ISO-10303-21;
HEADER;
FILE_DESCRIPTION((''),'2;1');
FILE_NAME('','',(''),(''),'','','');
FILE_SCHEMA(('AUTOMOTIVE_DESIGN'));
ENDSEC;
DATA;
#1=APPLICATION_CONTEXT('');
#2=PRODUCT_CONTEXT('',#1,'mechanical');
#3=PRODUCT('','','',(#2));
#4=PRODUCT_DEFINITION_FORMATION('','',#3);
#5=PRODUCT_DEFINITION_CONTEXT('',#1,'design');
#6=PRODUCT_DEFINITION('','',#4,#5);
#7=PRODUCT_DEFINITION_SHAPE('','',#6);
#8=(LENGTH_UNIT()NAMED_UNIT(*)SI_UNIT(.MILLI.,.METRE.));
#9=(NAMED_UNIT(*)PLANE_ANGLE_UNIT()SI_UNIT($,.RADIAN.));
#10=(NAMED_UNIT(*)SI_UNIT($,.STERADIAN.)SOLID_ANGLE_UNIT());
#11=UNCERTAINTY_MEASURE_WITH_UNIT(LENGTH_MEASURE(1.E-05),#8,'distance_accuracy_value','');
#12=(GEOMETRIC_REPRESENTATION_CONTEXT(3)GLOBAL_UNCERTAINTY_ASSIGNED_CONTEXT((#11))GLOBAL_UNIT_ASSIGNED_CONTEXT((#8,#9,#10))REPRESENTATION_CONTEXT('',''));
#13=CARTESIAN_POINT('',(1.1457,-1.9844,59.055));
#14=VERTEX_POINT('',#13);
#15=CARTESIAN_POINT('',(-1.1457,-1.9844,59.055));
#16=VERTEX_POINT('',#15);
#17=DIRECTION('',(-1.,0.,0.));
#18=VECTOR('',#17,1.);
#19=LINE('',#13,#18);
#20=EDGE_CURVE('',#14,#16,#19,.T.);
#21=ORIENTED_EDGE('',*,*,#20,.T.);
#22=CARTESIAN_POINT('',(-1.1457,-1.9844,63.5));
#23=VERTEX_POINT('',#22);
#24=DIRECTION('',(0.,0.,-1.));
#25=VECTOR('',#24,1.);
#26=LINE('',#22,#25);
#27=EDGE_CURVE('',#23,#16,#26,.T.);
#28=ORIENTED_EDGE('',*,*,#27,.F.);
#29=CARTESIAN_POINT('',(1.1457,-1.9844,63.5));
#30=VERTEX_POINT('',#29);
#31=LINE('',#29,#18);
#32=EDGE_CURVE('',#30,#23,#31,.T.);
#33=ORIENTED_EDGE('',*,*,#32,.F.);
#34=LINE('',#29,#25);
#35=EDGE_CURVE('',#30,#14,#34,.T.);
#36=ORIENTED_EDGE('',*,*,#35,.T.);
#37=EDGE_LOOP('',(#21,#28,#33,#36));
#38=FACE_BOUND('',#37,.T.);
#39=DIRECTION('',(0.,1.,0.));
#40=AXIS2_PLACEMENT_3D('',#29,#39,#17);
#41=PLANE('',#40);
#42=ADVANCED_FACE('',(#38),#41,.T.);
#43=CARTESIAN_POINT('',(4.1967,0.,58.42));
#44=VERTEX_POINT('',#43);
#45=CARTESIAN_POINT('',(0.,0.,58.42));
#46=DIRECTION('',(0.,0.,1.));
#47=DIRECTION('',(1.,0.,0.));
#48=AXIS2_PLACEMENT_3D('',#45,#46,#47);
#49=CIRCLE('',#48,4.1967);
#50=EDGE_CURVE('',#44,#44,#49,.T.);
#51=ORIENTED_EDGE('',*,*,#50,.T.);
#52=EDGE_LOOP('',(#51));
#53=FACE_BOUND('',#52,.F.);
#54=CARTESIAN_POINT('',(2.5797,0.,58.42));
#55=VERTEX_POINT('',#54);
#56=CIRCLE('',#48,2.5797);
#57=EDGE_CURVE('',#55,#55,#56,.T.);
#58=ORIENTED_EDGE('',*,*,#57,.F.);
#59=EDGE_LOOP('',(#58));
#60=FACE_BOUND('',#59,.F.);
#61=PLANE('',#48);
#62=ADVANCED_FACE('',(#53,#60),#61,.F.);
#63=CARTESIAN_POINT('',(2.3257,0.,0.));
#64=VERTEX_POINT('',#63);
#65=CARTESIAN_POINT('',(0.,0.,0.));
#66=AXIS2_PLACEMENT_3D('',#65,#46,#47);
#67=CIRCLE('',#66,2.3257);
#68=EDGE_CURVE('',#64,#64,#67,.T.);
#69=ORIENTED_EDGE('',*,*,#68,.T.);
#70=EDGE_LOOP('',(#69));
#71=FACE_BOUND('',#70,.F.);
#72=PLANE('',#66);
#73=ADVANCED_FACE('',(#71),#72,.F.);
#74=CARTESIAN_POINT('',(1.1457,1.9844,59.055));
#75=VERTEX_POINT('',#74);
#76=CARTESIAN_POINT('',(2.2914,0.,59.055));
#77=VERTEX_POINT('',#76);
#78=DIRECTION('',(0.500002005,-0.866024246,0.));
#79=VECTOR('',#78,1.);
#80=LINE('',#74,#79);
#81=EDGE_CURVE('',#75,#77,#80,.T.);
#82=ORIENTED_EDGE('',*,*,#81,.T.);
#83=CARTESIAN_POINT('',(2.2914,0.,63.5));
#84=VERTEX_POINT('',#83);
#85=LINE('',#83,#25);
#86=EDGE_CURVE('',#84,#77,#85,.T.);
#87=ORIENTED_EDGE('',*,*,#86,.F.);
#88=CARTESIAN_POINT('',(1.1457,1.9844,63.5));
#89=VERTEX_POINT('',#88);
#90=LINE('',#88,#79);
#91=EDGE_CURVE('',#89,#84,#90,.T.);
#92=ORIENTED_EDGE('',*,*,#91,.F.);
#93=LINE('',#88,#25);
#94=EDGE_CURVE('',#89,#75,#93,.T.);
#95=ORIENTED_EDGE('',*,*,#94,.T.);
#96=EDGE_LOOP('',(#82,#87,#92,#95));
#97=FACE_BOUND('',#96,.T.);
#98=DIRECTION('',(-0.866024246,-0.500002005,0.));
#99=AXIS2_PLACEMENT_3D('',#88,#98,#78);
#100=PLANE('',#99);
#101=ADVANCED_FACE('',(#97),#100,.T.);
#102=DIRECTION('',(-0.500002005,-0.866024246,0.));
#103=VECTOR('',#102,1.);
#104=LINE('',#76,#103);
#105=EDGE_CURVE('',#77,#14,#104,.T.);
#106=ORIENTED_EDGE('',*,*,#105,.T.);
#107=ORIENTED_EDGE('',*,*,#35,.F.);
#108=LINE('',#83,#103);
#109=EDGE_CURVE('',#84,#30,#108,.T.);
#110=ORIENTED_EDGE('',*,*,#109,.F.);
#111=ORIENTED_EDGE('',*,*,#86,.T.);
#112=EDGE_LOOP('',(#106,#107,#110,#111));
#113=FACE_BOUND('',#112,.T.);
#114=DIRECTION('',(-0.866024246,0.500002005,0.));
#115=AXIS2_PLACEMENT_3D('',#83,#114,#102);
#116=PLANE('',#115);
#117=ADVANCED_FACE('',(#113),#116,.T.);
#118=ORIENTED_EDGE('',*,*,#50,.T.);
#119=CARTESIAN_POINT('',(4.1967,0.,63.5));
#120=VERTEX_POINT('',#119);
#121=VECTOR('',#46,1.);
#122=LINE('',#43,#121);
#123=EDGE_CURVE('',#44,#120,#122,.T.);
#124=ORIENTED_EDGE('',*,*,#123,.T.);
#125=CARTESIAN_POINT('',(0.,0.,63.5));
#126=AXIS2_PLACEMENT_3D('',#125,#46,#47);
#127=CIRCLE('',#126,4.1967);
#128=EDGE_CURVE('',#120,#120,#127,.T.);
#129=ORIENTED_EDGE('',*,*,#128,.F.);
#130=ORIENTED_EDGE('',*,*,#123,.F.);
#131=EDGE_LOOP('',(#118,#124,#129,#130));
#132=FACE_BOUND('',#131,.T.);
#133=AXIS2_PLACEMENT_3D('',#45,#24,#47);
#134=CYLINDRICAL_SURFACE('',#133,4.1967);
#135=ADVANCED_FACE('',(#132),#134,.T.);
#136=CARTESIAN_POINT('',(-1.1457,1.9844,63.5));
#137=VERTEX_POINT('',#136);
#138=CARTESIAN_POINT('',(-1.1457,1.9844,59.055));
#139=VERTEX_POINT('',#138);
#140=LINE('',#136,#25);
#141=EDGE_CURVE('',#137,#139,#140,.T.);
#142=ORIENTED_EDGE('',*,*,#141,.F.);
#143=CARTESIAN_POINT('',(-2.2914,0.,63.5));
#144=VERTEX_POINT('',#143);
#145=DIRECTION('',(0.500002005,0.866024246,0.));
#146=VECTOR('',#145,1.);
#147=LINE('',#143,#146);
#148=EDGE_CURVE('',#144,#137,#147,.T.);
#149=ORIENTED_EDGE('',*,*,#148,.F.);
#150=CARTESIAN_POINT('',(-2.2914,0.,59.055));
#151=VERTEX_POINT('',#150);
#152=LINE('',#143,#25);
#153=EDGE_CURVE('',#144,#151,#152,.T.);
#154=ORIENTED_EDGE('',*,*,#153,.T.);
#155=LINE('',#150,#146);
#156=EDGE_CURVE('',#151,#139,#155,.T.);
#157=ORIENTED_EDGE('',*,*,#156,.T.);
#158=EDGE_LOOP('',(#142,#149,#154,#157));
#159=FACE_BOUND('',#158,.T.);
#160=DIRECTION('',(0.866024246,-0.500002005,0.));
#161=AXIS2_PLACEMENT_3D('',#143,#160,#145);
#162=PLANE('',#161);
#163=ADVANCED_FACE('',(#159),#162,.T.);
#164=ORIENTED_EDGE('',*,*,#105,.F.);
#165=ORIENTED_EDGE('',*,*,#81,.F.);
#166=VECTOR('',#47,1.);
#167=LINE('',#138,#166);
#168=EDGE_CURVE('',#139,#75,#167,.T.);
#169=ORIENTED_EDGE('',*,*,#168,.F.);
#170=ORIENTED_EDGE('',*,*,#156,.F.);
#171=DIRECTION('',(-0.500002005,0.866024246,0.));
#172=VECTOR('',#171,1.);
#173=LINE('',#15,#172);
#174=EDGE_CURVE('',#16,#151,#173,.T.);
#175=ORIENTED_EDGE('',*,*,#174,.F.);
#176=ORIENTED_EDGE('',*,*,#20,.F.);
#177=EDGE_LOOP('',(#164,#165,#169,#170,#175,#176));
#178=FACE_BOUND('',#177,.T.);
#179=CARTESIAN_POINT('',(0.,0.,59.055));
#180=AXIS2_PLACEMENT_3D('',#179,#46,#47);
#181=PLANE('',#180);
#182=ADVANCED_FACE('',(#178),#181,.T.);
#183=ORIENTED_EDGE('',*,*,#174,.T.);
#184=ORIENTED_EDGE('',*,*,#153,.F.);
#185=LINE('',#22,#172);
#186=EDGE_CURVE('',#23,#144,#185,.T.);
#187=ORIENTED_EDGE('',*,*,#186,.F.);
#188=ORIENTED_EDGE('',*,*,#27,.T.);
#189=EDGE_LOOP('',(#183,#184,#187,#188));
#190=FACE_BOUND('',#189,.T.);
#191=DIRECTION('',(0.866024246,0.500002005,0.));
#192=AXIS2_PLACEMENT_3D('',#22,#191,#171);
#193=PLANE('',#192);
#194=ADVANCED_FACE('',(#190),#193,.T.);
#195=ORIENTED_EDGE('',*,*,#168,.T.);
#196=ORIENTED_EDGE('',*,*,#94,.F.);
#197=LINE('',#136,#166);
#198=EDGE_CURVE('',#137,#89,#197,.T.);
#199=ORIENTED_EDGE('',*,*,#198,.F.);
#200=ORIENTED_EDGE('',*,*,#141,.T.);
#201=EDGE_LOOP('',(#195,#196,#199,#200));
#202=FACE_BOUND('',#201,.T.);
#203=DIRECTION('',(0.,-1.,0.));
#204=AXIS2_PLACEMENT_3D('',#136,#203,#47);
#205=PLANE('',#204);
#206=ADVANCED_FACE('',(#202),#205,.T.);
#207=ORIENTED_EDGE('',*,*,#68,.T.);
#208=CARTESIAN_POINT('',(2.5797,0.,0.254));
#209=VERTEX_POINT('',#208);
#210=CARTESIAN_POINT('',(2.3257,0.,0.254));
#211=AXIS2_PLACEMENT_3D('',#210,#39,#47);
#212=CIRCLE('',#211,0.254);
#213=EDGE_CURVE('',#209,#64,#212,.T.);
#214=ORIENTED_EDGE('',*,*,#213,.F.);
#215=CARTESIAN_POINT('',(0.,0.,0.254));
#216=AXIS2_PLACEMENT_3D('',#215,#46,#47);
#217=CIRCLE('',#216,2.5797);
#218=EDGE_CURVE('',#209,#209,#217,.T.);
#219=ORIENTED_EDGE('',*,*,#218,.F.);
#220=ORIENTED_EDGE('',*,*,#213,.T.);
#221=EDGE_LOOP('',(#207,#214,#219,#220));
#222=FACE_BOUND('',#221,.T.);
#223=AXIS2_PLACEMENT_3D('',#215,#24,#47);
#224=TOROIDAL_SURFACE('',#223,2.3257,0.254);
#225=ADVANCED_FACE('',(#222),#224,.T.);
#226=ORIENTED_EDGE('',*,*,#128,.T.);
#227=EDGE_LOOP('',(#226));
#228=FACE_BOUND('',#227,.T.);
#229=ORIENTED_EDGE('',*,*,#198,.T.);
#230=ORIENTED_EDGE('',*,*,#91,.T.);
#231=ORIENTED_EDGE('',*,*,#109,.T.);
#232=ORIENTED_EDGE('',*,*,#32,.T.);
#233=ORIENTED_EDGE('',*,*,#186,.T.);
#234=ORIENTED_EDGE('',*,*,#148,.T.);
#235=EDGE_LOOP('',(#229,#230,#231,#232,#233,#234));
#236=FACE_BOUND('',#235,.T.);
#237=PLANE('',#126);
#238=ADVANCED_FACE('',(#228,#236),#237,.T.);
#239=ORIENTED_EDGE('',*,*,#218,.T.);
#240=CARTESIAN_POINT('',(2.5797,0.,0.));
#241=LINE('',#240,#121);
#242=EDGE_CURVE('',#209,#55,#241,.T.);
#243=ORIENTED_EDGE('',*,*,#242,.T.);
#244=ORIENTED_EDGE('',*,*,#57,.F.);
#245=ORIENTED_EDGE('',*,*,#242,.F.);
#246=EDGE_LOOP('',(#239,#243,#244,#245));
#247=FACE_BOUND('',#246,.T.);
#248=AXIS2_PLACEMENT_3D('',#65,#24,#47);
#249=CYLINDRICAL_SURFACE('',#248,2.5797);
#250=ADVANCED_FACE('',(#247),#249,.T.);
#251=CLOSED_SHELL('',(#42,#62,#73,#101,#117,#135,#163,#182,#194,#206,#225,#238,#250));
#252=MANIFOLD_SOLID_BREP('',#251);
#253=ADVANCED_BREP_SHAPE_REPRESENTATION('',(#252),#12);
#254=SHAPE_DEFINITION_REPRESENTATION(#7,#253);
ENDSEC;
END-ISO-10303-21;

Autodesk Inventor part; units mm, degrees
ref_plane "YZ Plane" through (0, 0, 0) normal (1, 0, 0) x (0, 1, 0)
ref_plane "XZ Plane" through (0, 0, 0) normal (0, 1, 0) x (-1, 0, 0)
ref_plane "XY Plane" through (0, 0, 0) normal (0, 0, 1) x (1, 0, 0)
sketch "Sketch1" plane through (0, 0, 0) normal (0, 0, 1) x (1, 0, 0)
  circle A0 centre (0, 0) radius 2.5797
  dimension "d0" = 5.1594
extrude "Extrusion1" add sketch "Sketch1" along normal blind 58.42
sketch "Sketch2" plane through (0, 0, 58.42) normal (0, 0, 1) x (1, 0, 0)
  circle A0 centre (0, 0) radius 4.1967
extrude "Extrusion2" add sketch "Sketch2" along normal blind 5.08
sketch "Sketch3" plane through (0, 0, 63.5) normal (0, 0, 1) x (1, 0, 0)
  line L0 (1.1457, 1.9844) -> (2.2914, 0)
  line L1 (2.2914, 0) -> (1.1457, -1.9844)
  line L2 (1.1457, -1.9844) -> (-1.1457, -1.9844)
  line L3 (-1.1457, -1.9844) -> (-2.2914, 0)
  line L4 (-2.2914, 0) -> (-1.1457, 1.9844)
  line L5 (-1.1457, 1.9844) -> (1.1457, 1.9844)
  point P0 (0, 0)
  point P1 (0, 0)
  point P2 (0, 1.9844)
  dimension "d5" = 3.9688
extrude "Extrusion3" cut sketch "Sketch3" against normal blind 4.445
thread "Thread1" size "12-24 UNC" class "2A" standard "ANSI Unified Screw Threads" length 21.59
fillet "Fillet1" radius 0.254 1 edges at (-2.5797, 0, 0)
properties part number "10 l 20 2 1 l 2 bolt"
